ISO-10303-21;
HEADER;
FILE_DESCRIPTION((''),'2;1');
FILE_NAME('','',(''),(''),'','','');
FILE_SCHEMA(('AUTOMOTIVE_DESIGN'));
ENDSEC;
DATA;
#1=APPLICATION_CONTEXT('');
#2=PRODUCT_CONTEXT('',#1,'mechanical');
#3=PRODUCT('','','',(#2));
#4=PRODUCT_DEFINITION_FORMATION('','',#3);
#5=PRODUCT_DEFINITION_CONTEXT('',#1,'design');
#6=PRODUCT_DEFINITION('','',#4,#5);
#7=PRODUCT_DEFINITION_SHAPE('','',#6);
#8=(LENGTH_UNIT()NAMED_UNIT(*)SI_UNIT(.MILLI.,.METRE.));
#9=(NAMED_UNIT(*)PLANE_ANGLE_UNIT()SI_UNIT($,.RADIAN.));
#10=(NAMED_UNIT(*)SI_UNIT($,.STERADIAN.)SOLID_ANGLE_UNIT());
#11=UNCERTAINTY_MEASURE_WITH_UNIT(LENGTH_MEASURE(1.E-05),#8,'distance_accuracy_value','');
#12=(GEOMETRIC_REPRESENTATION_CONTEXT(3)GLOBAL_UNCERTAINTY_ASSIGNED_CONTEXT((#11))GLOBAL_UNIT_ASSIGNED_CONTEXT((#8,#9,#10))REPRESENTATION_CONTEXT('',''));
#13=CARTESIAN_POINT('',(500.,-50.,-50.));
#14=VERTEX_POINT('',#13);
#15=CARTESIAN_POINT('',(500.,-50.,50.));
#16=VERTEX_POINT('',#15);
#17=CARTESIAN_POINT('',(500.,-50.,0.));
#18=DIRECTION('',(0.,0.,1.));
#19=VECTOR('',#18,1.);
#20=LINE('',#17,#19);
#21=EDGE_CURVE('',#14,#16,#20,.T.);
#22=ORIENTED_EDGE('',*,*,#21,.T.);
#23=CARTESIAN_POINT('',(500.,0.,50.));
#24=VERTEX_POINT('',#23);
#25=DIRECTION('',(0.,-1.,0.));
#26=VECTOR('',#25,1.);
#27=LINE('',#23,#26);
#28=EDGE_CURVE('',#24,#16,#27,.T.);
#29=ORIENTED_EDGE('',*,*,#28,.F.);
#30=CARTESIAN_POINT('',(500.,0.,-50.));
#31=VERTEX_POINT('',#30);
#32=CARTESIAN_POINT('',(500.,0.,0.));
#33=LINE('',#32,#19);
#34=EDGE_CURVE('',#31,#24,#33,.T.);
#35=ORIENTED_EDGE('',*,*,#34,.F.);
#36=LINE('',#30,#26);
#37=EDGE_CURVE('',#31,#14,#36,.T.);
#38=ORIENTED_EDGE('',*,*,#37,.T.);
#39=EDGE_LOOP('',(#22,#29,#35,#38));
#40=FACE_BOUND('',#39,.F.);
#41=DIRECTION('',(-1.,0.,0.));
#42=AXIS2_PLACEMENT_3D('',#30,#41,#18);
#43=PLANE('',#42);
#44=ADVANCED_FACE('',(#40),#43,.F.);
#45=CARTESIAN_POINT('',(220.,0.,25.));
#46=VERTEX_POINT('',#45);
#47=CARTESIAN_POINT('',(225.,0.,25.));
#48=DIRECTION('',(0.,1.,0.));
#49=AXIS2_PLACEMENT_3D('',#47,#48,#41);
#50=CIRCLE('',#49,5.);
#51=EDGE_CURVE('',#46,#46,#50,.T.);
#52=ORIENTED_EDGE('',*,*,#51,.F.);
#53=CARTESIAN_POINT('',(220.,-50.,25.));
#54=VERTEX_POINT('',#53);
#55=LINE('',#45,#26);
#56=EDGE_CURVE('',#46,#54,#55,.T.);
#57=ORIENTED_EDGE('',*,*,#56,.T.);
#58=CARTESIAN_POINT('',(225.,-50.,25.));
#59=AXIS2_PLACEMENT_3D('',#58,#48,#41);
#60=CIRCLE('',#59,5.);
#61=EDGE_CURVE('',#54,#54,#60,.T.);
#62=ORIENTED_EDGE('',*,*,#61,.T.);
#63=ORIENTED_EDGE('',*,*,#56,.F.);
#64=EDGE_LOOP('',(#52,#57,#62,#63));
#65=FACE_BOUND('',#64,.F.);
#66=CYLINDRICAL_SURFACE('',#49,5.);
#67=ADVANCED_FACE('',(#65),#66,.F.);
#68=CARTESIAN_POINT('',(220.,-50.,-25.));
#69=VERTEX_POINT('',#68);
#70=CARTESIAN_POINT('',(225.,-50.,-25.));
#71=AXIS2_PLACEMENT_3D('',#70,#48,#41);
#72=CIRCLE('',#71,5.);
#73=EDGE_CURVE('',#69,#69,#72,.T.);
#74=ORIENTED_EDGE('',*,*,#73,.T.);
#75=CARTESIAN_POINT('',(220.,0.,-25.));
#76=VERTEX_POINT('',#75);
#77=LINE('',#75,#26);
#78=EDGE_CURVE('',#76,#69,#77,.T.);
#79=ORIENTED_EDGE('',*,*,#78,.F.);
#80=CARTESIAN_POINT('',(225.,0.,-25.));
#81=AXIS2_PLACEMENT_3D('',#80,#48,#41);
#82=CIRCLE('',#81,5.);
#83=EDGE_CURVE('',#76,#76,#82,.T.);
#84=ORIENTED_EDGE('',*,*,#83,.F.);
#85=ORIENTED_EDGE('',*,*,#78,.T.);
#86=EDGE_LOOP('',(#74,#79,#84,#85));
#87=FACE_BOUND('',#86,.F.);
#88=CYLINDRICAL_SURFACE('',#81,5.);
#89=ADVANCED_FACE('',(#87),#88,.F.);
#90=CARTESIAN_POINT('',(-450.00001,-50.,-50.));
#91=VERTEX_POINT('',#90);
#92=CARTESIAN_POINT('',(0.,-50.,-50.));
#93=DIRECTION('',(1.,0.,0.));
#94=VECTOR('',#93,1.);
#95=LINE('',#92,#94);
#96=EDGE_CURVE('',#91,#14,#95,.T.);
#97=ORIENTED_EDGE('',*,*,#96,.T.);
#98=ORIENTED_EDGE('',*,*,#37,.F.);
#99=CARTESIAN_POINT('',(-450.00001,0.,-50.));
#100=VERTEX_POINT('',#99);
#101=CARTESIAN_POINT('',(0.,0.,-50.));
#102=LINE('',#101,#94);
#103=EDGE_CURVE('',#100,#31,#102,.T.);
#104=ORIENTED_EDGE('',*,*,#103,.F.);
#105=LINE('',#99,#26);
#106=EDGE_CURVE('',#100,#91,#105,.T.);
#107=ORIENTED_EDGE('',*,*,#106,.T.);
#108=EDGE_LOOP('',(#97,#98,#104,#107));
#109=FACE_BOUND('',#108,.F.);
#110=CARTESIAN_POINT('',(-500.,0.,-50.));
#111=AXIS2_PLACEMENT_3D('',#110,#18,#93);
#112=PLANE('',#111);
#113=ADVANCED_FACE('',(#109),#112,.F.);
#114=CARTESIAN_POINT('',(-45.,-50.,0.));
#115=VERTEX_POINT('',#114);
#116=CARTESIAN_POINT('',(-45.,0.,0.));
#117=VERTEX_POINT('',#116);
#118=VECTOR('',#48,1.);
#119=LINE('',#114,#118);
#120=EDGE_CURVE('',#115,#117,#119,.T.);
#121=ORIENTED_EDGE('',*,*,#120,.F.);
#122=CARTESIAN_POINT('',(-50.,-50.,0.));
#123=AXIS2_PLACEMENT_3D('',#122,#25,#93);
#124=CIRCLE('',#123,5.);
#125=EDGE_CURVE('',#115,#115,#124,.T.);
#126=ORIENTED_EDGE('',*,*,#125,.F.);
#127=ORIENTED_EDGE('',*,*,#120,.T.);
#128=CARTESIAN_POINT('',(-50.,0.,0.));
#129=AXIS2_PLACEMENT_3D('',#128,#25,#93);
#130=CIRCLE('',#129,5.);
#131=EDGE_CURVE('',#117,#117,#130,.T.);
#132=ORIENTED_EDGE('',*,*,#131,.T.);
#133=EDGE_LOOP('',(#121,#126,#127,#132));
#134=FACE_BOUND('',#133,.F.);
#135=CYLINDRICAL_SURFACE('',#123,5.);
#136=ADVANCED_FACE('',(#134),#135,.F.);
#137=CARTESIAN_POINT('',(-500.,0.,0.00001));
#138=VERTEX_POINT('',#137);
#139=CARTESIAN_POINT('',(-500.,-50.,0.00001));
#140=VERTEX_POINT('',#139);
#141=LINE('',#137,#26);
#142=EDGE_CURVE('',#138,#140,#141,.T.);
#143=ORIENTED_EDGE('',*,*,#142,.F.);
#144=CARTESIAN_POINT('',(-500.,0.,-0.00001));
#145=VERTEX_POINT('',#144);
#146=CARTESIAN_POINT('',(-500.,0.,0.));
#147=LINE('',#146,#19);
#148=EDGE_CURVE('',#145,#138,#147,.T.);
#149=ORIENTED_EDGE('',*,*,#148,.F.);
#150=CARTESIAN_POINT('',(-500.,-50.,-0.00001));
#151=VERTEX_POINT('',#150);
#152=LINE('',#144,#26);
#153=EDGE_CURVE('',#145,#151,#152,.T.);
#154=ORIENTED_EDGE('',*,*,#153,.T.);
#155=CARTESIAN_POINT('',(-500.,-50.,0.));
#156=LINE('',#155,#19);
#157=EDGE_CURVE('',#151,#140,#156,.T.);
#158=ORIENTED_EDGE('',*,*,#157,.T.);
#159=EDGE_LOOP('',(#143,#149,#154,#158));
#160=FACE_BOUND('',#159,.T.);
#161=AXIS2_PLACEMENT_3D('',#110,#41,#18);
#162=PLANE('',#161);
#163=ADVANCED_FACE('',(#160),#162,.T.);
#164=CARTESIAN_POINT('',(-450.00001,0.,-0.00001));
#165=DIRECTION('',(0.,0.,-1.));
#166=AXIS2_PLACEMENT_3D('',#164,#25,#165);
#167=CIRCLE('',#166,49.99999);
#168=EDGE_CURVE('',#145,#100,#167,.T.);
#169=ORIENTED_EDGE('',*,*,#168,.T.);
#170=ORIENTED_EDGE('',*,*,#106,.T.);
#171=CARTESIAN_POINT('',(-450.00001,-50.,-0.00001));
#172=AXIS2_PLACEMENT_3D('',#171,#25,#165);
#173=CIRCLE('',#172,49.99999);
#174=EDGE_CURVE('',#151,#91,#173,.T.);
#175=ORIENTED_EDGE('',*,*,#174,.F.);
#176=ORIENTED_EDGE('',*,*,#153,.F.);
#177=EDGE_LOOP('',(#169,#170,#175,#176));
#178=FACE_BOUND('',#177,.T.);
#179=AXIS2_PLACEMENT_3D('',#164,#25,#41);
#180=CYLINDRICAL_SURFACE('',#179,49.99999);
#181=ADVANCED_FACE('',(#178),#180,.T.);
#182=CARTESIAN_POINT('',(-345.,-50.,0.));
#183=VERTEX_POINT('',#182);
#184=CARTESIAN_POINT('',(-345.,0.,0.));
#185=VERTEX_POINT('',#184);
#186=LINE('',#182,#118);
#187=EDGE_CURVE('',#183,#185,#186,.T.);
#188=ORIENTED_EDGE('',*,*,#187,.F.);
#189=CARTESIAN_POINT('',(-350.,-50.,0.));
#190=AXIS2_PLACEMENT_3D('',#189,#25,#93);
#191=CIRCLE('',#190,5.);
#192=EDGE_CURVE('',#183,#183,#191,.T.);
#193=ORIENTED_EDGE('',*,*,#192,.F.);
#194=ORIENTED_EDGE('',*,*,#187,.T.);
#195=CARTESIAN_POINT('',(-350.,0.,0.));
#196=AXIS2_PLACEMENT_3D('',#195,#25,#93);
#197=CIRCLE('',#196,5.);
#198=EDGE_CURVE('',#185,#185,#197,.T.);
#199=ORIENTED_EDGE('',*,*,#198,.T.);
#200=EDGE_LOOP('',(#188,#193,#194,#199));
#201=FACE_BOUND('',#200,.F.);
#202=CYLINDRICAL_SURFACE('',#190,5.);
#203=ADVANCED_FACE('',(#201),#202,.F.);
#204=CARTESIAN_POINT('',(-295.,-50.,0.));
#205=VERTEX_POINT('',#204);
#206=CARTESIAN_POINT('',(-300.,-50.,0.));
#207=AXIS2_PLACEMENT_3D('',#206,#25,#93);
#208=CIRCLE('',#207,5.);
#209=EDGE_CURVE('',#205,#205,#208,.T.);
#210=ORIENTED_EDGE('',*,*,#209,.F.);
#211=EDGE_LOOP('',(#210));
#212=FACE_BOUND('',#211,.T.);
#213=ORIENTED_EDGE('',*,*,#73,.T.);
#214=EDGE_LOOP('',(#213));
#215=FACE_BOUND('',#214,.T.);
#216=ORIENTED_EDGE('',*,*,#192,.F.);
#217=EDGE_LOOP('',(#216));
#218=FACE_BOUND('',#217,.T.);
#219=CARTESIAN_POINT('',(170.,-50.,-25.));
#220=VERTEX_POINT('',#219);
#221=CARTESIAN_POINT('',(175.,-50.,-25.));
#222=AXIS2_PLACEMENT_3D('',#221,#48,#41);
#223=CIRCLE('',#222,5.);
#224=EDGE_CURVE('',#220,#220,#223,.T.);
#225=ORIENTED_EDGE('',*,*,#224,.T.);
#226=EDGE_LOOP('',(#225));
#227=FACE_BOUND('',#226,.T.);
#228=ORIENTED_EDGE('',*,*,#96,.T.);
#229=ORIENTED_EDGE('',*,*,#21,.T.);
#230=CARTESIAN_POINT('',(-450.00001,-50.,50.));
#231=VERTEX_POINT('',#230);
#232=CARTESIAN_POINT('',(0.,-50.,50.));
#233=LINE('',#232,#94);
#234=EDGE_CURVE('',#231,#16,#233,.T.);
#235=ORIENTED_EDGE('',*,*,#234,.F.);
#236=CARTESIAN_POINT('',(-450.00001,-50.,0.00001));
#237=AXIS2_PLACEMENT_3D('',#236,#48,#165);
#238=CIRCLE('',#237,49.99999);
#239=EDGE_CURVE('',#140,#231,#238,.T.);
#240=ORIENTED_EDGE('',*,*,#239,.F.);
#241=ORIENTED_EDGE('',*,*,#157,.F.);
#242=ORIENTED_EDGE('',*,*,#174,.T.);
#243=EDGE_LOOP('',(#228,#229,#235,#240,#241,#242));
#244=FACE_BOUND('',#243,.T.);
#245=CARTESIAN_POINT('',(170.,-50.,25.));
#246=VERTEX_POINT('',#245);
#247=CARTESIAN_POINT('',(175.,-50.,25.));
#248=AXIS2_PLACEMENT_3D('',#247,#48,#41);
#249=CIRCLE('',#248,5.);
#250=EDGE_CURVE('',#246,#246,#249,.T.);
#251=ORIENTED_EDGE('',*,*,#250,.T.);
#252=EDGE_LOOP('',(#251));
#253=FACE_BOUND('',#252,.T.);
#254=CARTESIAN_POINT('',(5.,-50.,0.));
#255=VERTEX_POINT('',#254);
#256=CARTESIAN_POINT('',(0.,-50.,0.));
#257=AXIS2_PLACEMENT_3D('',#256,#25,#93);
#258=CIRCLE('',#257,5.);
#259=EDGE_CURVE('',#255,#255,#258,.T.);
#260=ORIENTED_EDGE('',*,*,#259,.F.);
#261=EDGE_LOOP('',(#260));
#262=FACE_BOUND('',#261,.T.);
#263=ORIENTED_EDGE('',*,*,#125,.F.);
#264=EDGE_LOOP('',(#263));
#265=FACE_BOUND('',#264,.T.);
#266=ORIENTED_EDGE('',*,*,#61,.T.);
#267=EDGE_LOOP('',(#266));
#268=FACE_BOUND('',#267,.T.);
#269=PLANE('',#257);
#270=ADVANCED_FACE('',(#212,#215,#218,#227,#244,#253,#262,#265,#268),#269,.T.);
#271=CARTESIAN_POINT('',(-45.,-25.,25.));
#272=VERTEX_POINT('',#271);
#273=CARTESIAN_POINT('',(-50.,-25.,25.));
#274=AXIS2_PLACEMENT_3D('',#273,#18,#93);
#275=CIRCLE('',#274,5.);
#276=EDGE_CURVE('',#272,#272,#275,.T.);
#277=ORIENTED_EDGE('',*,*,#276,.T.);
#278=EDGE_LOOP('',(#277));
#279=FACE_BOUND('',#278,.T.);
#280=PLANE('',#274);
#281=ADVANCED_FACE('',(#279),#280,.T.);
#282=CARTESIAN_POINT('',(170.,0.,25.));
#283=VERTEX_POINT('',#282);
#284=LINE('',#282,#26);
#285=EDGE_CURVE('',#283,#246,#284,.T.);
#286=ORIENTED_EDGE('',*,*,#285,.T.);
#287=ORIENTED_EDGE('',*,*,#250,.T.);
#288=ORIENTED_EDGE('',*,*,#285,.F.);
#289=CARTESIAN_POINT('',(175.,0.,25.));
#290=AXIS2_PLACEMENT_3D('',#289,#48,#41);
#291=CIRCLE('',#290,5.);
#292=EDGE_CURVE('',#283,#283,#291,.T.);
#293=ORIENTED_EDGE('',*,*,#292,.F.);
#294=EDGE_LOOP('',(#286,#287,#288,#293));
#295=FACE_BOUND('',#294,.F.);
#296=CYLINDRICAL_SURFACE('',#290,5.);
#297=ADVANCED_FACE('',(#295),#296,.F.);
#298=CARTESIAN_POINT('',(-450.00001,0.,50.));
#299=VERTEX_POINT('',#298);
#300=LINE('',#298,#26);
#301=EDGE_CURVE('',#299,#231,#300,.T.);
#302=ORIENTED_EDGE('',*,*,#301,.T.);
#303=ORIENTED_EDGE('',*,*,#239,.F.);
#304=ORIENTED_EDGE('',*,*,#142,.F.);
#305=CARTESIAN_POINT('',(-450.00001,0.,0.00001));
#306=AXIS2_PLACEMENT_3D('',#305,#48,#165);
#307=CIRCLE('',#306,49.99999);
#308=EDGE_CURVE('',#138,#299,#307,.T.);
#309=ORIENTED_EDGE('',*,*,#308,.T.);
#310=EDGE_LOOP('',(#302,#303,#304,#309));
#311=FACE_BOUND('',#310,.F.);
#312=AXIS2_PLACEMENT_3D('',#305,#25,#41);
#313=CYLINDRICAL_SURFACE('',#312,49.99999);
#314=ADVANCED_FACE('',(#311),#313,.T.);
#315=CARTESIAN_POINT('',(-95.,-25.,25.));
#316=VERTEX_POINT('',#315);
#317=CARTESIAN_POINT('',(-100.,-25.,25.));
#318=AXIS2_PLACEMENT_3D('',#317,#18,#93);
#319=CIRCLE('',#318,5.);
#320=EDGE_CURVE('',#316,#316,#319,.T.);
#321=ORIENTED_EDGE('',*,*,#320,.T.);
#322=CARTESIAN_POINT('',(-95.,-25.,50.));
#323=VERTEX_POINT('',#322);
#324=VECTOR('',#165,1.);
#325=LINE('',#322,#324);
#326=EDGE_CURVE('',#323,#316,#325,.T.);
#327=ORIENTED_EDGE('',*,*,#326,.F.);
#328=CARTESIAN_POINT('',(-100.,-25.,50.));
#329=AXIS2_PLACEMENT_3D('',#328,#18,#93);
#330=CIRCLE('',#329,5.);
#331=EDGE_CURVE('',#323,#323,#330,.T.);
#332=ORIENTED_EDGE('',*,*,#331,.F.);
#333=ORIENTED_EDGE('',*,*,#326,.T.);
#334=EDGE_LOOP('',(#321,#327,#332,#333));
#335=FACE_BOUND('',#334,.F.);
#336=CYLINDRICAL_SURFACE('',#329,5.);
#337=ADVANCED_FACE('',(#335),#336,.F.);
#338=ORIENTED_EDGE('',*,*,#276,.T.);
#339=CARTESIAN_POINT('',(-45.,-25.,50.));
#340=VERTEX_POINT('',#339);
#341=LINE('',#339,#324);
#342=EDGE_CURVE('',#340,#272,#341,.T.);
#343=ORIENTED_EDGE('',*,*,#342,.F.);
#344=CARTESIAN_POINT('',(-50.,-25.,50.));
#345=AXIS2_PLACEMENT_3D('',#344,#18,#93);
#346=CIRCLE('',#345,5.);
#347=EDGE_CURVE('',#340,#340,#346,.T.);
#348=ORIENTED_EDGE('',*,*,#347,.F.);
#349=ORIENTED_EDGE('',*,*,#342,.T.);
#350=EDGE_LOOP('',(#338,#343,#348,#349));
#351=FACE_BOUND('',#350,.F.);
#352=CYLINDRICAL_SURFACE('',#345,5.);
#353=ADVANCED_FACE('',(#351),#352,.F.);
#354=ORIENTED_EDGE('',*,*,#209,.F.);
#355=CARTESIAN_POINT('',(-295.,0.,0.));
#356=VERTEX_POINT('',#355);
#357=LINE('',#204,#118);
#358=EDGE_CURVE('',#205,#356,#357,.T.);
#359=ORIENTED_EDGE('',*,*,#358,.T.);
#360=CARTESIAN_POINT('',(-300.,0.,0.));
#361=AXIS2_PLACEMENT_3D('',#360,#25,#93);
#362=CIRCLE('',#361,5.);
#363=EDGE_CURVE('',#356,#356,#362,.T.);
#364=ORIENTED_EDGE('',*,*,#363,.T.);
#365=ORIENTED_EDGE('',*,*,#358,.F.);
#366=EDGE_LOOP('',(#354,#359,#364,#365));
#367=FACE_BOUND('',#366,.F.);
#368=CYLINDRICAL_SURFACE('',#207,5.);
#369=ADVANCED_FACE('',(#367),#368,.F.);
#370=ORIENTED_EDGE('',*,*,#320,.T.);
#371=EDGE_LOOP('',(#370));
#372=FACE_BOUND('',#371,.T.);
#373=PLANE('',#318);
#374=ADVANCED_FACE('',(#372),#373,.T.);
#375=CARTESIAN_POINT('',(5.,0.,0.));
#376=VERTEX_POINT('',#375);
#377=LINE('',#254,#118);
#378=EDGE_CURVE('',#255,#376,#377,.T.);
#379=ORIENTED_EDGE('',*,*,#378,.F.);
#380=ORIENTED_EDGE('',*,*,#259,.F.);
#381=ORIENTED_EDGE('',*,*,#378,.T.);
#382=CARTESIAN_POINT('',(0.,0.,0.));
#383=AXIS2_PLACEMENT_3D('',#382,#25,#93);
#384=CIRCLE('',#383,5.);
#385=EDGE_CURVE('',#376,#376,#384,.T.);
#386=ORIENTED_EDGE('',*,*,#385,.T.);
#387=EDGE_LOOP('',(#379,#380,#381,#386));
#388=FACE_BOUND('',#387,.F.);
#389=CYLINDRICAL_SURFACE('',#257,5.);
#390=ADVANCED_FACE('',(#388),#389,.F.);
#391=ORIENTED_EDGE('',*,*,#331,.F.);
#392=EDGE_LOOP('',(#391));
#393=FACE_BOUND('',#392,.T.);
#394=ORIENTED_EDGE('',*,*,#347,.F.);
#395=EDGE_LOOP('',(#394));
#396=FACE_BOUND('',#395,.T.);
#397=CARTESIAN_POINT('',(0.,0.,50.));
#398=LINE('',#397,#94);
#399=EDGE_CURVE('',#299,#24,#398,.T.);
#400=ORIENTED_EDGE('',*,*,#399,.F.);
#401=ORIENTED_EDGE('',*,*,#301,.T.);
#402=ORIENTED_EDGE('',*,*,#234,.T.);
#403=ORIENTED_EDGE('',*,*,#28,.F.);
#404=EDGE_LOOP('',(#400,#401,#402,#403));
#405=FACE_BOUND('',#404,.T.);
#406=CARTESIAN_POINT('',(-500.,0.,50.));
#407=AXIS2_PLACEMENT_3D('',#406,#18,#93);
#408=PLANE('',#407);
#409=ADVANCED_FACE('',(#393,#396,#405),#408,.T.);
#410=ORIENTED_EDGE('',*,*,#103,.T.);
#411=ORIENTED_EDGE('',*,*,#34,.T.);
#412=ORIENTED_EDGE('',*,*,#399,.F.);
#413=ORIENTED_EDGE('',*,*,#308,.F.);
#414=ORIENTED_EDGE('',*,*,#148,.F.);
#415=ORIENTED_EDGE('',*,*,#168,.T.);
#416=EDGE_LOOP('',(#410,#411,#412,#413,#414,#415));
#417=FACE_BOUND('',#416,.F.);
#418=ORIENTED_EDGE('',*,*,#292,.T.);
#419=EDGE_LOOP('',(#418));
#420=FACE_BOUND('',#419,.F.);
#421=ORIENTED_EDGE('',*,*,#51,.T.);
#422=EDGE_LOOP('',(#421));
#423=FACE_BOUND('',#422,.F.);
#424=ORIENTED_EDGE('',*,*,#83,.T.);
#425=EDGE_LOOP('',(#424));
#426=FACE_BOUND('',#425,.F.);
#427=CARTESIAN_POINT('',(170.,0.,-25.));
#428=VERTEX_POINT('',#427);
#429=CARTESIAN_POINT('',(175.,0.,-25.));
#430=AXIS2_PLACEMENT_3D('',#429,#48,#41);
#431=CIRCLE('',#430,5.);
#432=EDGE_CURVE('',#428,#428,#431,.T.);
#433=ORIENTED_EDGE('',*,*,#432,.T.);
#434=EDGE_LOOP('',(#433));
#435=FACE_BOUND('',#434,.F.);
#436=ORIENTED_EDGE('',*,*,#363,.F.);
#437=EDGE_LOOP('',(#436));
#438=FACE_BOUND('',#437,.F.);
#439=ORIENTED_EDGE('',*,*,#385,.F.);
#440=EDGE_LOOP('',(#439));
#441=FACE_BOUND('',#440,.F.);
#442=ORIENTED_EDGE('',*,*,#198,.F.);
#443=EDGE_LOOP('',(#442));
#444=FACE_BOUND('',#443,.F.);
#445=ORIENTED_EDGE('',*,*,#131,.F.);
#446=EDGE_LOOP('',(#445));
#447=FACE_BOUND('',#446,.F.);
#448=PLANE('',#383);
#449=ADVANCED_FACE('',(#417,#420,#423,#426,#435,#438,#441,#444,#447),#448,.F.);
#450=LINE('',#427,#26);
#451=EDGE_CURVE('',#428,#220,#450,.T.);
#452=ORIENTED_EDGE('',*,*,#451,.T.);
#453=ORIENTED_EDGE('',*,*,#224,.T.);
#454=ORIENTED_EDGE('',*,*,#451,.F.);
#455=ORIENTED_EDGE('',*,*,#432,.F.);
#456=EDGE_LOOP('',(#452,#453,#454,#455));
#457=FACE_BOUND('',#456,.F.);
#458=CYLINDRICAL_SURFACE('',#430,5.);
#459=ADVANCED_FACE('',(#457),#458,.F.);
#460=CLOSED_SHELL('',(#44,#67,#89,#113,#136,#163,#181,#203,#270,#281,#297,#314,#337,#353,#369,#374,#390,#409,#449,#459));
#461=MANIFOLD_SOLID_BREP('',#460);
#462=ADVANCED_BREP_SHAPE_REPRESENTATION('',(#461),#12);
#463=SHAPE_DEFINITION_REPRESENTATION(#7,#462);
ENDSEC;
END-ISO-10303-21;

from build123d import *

# Parameters (mm, degrees)
F0_W     = 1000
F0_H     = 100
F1_DEPTH = 50
F3_R     = 5
F4_DEPTH = 25
F2_R     = 5
F5_DEPTH = 50
F6_R     = 5
F7_DEPTH = 50
F8_R     = 49.99999


# Not quite as in the source:
# - a fillet or chamfer is up to 0.001 mm smaller than in the source, because OpenCascade refuses the exact size


with BuildPart() as f1:
    # F0 (on Front) → F1 (new body)
    with BuildSketch(Plane.XZ):
        Rectangle(F0_W, F0_H)
    extrude(amount=F1_DEPTH)

    # F3 (on face) → F4 (cut)
    with BuildSketch(Plane.XY.offset(50)):
        with Locations((-100, -25)):
            Circle(F3_R)
        with Locations((-50, -25)):
            Circle(F3_R)
    extrude(amount=-F4_DEPTH, mode=Mode.SUBTRACT)

    # F2 (on face) → F5 (cut)
    with BuildSketch(Plane.XZ.offset(50)):
        with Locations((-50, 0)):
            Circle(F2_R)
        Circle(F2_R)
        with Locations((-350, 0)):
            Circle(F2_R)
        with Locations((-300, 0)):
            Circle(F2_R)
    extrude(amount=-F5_DEPTH, mode=Mode.SUBTRACT)

    # F6 (on face) → F7 (cut)
    with BuildSketch(Plane(origin=(0, 0, 0), x_dir=(-1, 0, 0), z_dir=(0, 1, 0))):
        with Locations((-225, -25)):
            Circle(F6_R)
        with Locations((-175, -25)):
            Circle(F6_R)
        with Locations((-225, 25)):
            Circle(F6_R)
        with Locations((-175, 25)):
            Circle(F6_R)
    extrude(amount=-F7_DEPTH, mode=Mode.SUBTRACT)

    # F8 (radius 50 in the source; OpenCascade refuses exactly that, so slightly less here)
    f8_edges = [f1.edges().sort_by_distance(p)[0] for p in [
        (-500, -25, 50),
        (-500, -25, -50),
    ]]
    fillet(f8_edges, radius=F8_R)


solid = f1.part
